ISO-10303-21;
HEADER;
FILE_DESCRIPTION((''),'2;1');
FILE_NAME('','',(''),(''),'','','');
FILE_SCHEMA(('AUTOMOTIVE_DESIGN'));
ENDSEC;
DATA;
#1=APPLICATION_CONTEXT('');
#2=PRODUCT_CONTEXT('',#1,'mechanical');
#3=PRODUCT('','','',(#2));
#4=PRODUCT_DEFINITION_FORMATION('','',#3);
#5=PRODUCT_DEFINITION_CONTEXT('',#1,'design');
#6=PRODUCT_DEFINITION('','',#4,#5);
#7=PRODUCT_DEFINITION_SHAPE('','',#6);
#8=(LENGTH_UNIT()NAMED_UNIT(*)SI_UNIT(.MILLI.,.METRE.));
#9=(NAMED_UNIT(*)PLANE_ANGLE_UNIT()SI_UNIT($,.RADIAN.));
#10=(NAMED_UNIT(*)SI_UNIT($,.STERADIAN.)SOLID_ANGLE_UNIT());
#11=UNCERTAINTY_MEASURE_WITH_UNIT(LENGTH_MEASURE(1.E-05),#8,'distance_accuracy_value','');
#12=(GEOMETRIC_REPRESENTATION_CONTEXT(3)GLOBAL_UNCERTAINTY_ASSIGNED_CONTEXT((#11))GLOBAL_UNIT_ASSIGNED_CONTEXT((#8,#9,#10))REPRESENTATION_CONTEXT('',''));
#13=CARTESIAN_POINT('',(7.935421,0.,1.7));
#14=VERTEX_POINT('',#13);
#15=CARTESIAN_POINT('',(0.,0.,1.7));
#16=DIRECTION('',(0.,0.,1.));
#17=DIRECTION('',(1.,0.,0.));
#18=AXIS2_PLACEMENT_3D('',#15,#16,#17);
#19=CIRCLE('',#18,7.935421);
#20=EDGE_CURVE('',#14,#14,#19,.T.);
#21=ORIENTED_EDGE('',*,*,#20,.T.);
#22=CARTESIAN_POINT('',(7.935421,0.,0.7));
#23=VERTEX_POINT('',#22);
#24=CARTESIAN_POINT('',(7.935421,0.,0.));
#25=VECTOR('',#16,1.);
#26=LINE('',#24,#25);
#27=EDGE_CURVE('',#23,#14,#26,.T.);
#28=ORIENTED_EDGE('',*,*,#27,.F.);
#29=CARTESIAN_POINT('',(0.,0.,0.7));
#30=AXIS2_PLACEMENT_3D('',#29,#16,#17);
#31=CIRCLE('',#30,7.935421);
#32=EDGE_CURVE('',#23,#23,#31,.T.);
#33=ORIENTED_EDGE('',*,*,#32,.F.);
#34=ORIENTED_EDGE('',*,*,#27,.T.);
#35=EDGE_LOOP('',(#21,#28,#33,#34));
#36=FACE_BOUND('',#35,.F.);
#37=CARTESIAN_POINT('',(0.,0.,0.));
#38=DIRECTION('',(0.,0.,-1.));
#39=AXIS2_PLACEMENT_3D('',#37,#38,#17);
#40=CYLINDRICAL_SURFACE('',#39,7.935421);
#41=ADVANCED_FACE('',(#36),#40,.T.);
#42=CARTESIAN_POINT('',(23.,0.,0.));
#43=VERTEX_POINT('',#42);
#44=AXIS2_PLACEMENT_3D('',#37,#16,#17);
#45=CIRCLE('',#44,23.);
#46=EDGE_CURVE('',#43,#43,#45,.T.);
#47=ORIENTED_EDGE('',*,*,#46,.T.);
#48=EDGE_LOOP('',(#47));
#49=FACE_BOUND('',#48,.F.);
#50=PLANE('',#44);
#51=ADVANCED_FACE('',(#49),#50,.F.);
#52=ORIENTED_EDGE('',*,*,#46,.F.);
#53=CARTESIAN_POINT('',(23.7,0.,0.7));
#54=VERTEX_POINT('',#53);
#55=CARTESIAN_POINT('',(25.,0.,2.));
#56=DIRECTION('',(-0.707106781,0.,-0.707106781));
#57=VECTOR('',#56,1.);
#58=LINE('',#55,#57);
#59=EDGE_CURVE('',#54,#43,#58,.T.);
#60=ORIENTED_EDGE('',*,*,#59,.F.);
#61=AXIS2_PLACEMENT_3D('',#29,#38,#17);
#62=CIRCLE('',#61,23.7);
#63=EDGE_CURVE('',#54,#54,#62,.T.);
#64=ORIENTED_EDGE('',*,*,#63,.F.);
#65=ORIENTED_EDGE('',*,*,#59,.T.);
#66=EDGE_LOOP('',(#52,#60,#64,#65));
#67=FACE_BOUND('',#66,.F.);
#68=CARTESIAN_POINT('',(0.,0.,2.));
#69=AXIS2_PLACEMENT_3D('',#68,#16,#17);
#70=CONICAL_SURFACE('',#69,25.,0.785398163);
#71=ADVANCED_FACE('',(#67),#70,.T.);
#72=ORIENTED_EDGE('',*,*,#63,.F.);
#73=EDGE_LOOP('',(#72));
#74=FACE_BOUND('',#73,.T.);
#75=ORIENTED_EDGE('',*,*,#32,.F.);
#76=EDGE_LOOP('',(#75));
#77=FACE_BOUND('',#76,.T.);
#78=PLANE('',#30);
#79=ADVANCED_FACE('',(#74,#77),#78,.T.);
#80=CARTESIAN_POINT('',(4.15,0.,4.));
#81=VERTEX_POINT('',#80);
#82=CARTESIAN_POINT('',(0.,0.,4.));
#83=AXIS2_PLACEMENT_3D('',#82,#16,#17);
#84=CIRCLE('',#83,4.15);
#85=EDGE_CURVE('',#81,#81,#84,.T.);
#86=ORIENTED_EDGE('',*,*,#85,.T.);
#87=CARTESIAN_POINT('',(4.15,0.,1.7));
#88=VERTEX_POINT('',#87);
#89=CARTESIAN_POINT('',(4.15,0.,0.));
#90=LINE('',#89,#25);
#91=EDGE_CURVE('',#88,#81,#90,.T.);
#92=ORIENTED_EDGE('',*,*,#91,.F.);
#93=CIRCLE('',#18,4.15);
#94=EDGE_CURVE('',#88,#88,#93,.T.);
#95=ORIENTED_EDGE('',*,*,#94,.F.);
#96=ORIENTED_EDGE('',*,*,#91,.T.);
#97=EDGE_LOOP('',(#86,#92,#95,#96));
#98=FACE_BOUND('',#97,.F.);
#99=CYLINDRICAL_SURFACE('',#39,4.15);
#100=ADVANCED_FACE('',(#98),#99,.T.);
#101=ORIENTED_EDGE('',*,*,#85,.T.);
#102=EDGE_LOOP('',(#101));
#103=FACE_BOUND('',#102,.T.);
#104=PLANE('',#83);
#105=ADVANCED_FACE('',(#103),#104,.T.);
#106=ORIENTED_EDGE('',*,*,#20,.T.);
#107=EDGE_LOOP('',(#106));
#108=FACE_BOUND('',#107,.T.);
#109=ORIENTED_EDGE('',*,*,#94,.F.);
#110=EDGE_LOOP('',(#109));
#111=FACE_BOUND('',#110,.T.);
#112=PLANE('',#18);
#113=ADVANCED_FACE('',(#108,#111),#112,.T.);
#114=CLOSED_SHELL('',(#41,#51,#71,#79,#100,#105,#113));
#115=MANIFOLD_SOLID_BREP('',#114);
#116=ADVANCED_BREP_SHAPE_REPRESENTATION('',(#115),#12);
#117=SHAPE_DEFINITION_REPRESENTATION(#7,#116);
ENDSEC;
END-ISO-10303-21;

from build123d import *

# Parameters (mm, degrees)
F0_R     = 25
F0_R_2   = 7.9354206637
F1_DEPTH = 0.7
F0_R_3   = 4.15
F2_DEPTH = 1.7
F3_DEPTH = 4


# Not quite as in the source:
# - a fillet or chamfer that OpenCascade refuses, or shapes differently, is made with other operations: its cross-section is extruded or revolved along the edge and cut away or added


with BuildPart() as f1:
    # F0 (on Top) → F1 (new body)
    with BuildSketch(Plane.XY):
        Circle(F0_R)
        Circle(F0_R_2, mode=Mode.SUBTRACT)
    extrude(amount=F1_DEPTH)

    # F0 (on Top) → F2 (join)
    with BuildSketch(Plane.XY):
        Circle(F0_R_2)
        Circle(F0_R_3, mode=Mode.SUBTRACT)
    extrude(amount=F2_DEPTH)

    # F0 (on Top) → F3 (join)
    with BuildSketch(Plane.XY):
        Circle(F0_R_3)
    extrude(amount=F3_DEPTH)

    # F4: chamfer of 2 on 1 edges, made by hand

    # F4_s1 → F4_t2 (revolve, cut)
    with BuildSketch(Plane.XZ):
        Polygon((25, 2), (23, 0), (25, 0), align=None)
    revolve(axis=Axis((0, 0, 0), (0, 0, 1)), mode=Mode.SUBTRACT)


solid = f1.part
